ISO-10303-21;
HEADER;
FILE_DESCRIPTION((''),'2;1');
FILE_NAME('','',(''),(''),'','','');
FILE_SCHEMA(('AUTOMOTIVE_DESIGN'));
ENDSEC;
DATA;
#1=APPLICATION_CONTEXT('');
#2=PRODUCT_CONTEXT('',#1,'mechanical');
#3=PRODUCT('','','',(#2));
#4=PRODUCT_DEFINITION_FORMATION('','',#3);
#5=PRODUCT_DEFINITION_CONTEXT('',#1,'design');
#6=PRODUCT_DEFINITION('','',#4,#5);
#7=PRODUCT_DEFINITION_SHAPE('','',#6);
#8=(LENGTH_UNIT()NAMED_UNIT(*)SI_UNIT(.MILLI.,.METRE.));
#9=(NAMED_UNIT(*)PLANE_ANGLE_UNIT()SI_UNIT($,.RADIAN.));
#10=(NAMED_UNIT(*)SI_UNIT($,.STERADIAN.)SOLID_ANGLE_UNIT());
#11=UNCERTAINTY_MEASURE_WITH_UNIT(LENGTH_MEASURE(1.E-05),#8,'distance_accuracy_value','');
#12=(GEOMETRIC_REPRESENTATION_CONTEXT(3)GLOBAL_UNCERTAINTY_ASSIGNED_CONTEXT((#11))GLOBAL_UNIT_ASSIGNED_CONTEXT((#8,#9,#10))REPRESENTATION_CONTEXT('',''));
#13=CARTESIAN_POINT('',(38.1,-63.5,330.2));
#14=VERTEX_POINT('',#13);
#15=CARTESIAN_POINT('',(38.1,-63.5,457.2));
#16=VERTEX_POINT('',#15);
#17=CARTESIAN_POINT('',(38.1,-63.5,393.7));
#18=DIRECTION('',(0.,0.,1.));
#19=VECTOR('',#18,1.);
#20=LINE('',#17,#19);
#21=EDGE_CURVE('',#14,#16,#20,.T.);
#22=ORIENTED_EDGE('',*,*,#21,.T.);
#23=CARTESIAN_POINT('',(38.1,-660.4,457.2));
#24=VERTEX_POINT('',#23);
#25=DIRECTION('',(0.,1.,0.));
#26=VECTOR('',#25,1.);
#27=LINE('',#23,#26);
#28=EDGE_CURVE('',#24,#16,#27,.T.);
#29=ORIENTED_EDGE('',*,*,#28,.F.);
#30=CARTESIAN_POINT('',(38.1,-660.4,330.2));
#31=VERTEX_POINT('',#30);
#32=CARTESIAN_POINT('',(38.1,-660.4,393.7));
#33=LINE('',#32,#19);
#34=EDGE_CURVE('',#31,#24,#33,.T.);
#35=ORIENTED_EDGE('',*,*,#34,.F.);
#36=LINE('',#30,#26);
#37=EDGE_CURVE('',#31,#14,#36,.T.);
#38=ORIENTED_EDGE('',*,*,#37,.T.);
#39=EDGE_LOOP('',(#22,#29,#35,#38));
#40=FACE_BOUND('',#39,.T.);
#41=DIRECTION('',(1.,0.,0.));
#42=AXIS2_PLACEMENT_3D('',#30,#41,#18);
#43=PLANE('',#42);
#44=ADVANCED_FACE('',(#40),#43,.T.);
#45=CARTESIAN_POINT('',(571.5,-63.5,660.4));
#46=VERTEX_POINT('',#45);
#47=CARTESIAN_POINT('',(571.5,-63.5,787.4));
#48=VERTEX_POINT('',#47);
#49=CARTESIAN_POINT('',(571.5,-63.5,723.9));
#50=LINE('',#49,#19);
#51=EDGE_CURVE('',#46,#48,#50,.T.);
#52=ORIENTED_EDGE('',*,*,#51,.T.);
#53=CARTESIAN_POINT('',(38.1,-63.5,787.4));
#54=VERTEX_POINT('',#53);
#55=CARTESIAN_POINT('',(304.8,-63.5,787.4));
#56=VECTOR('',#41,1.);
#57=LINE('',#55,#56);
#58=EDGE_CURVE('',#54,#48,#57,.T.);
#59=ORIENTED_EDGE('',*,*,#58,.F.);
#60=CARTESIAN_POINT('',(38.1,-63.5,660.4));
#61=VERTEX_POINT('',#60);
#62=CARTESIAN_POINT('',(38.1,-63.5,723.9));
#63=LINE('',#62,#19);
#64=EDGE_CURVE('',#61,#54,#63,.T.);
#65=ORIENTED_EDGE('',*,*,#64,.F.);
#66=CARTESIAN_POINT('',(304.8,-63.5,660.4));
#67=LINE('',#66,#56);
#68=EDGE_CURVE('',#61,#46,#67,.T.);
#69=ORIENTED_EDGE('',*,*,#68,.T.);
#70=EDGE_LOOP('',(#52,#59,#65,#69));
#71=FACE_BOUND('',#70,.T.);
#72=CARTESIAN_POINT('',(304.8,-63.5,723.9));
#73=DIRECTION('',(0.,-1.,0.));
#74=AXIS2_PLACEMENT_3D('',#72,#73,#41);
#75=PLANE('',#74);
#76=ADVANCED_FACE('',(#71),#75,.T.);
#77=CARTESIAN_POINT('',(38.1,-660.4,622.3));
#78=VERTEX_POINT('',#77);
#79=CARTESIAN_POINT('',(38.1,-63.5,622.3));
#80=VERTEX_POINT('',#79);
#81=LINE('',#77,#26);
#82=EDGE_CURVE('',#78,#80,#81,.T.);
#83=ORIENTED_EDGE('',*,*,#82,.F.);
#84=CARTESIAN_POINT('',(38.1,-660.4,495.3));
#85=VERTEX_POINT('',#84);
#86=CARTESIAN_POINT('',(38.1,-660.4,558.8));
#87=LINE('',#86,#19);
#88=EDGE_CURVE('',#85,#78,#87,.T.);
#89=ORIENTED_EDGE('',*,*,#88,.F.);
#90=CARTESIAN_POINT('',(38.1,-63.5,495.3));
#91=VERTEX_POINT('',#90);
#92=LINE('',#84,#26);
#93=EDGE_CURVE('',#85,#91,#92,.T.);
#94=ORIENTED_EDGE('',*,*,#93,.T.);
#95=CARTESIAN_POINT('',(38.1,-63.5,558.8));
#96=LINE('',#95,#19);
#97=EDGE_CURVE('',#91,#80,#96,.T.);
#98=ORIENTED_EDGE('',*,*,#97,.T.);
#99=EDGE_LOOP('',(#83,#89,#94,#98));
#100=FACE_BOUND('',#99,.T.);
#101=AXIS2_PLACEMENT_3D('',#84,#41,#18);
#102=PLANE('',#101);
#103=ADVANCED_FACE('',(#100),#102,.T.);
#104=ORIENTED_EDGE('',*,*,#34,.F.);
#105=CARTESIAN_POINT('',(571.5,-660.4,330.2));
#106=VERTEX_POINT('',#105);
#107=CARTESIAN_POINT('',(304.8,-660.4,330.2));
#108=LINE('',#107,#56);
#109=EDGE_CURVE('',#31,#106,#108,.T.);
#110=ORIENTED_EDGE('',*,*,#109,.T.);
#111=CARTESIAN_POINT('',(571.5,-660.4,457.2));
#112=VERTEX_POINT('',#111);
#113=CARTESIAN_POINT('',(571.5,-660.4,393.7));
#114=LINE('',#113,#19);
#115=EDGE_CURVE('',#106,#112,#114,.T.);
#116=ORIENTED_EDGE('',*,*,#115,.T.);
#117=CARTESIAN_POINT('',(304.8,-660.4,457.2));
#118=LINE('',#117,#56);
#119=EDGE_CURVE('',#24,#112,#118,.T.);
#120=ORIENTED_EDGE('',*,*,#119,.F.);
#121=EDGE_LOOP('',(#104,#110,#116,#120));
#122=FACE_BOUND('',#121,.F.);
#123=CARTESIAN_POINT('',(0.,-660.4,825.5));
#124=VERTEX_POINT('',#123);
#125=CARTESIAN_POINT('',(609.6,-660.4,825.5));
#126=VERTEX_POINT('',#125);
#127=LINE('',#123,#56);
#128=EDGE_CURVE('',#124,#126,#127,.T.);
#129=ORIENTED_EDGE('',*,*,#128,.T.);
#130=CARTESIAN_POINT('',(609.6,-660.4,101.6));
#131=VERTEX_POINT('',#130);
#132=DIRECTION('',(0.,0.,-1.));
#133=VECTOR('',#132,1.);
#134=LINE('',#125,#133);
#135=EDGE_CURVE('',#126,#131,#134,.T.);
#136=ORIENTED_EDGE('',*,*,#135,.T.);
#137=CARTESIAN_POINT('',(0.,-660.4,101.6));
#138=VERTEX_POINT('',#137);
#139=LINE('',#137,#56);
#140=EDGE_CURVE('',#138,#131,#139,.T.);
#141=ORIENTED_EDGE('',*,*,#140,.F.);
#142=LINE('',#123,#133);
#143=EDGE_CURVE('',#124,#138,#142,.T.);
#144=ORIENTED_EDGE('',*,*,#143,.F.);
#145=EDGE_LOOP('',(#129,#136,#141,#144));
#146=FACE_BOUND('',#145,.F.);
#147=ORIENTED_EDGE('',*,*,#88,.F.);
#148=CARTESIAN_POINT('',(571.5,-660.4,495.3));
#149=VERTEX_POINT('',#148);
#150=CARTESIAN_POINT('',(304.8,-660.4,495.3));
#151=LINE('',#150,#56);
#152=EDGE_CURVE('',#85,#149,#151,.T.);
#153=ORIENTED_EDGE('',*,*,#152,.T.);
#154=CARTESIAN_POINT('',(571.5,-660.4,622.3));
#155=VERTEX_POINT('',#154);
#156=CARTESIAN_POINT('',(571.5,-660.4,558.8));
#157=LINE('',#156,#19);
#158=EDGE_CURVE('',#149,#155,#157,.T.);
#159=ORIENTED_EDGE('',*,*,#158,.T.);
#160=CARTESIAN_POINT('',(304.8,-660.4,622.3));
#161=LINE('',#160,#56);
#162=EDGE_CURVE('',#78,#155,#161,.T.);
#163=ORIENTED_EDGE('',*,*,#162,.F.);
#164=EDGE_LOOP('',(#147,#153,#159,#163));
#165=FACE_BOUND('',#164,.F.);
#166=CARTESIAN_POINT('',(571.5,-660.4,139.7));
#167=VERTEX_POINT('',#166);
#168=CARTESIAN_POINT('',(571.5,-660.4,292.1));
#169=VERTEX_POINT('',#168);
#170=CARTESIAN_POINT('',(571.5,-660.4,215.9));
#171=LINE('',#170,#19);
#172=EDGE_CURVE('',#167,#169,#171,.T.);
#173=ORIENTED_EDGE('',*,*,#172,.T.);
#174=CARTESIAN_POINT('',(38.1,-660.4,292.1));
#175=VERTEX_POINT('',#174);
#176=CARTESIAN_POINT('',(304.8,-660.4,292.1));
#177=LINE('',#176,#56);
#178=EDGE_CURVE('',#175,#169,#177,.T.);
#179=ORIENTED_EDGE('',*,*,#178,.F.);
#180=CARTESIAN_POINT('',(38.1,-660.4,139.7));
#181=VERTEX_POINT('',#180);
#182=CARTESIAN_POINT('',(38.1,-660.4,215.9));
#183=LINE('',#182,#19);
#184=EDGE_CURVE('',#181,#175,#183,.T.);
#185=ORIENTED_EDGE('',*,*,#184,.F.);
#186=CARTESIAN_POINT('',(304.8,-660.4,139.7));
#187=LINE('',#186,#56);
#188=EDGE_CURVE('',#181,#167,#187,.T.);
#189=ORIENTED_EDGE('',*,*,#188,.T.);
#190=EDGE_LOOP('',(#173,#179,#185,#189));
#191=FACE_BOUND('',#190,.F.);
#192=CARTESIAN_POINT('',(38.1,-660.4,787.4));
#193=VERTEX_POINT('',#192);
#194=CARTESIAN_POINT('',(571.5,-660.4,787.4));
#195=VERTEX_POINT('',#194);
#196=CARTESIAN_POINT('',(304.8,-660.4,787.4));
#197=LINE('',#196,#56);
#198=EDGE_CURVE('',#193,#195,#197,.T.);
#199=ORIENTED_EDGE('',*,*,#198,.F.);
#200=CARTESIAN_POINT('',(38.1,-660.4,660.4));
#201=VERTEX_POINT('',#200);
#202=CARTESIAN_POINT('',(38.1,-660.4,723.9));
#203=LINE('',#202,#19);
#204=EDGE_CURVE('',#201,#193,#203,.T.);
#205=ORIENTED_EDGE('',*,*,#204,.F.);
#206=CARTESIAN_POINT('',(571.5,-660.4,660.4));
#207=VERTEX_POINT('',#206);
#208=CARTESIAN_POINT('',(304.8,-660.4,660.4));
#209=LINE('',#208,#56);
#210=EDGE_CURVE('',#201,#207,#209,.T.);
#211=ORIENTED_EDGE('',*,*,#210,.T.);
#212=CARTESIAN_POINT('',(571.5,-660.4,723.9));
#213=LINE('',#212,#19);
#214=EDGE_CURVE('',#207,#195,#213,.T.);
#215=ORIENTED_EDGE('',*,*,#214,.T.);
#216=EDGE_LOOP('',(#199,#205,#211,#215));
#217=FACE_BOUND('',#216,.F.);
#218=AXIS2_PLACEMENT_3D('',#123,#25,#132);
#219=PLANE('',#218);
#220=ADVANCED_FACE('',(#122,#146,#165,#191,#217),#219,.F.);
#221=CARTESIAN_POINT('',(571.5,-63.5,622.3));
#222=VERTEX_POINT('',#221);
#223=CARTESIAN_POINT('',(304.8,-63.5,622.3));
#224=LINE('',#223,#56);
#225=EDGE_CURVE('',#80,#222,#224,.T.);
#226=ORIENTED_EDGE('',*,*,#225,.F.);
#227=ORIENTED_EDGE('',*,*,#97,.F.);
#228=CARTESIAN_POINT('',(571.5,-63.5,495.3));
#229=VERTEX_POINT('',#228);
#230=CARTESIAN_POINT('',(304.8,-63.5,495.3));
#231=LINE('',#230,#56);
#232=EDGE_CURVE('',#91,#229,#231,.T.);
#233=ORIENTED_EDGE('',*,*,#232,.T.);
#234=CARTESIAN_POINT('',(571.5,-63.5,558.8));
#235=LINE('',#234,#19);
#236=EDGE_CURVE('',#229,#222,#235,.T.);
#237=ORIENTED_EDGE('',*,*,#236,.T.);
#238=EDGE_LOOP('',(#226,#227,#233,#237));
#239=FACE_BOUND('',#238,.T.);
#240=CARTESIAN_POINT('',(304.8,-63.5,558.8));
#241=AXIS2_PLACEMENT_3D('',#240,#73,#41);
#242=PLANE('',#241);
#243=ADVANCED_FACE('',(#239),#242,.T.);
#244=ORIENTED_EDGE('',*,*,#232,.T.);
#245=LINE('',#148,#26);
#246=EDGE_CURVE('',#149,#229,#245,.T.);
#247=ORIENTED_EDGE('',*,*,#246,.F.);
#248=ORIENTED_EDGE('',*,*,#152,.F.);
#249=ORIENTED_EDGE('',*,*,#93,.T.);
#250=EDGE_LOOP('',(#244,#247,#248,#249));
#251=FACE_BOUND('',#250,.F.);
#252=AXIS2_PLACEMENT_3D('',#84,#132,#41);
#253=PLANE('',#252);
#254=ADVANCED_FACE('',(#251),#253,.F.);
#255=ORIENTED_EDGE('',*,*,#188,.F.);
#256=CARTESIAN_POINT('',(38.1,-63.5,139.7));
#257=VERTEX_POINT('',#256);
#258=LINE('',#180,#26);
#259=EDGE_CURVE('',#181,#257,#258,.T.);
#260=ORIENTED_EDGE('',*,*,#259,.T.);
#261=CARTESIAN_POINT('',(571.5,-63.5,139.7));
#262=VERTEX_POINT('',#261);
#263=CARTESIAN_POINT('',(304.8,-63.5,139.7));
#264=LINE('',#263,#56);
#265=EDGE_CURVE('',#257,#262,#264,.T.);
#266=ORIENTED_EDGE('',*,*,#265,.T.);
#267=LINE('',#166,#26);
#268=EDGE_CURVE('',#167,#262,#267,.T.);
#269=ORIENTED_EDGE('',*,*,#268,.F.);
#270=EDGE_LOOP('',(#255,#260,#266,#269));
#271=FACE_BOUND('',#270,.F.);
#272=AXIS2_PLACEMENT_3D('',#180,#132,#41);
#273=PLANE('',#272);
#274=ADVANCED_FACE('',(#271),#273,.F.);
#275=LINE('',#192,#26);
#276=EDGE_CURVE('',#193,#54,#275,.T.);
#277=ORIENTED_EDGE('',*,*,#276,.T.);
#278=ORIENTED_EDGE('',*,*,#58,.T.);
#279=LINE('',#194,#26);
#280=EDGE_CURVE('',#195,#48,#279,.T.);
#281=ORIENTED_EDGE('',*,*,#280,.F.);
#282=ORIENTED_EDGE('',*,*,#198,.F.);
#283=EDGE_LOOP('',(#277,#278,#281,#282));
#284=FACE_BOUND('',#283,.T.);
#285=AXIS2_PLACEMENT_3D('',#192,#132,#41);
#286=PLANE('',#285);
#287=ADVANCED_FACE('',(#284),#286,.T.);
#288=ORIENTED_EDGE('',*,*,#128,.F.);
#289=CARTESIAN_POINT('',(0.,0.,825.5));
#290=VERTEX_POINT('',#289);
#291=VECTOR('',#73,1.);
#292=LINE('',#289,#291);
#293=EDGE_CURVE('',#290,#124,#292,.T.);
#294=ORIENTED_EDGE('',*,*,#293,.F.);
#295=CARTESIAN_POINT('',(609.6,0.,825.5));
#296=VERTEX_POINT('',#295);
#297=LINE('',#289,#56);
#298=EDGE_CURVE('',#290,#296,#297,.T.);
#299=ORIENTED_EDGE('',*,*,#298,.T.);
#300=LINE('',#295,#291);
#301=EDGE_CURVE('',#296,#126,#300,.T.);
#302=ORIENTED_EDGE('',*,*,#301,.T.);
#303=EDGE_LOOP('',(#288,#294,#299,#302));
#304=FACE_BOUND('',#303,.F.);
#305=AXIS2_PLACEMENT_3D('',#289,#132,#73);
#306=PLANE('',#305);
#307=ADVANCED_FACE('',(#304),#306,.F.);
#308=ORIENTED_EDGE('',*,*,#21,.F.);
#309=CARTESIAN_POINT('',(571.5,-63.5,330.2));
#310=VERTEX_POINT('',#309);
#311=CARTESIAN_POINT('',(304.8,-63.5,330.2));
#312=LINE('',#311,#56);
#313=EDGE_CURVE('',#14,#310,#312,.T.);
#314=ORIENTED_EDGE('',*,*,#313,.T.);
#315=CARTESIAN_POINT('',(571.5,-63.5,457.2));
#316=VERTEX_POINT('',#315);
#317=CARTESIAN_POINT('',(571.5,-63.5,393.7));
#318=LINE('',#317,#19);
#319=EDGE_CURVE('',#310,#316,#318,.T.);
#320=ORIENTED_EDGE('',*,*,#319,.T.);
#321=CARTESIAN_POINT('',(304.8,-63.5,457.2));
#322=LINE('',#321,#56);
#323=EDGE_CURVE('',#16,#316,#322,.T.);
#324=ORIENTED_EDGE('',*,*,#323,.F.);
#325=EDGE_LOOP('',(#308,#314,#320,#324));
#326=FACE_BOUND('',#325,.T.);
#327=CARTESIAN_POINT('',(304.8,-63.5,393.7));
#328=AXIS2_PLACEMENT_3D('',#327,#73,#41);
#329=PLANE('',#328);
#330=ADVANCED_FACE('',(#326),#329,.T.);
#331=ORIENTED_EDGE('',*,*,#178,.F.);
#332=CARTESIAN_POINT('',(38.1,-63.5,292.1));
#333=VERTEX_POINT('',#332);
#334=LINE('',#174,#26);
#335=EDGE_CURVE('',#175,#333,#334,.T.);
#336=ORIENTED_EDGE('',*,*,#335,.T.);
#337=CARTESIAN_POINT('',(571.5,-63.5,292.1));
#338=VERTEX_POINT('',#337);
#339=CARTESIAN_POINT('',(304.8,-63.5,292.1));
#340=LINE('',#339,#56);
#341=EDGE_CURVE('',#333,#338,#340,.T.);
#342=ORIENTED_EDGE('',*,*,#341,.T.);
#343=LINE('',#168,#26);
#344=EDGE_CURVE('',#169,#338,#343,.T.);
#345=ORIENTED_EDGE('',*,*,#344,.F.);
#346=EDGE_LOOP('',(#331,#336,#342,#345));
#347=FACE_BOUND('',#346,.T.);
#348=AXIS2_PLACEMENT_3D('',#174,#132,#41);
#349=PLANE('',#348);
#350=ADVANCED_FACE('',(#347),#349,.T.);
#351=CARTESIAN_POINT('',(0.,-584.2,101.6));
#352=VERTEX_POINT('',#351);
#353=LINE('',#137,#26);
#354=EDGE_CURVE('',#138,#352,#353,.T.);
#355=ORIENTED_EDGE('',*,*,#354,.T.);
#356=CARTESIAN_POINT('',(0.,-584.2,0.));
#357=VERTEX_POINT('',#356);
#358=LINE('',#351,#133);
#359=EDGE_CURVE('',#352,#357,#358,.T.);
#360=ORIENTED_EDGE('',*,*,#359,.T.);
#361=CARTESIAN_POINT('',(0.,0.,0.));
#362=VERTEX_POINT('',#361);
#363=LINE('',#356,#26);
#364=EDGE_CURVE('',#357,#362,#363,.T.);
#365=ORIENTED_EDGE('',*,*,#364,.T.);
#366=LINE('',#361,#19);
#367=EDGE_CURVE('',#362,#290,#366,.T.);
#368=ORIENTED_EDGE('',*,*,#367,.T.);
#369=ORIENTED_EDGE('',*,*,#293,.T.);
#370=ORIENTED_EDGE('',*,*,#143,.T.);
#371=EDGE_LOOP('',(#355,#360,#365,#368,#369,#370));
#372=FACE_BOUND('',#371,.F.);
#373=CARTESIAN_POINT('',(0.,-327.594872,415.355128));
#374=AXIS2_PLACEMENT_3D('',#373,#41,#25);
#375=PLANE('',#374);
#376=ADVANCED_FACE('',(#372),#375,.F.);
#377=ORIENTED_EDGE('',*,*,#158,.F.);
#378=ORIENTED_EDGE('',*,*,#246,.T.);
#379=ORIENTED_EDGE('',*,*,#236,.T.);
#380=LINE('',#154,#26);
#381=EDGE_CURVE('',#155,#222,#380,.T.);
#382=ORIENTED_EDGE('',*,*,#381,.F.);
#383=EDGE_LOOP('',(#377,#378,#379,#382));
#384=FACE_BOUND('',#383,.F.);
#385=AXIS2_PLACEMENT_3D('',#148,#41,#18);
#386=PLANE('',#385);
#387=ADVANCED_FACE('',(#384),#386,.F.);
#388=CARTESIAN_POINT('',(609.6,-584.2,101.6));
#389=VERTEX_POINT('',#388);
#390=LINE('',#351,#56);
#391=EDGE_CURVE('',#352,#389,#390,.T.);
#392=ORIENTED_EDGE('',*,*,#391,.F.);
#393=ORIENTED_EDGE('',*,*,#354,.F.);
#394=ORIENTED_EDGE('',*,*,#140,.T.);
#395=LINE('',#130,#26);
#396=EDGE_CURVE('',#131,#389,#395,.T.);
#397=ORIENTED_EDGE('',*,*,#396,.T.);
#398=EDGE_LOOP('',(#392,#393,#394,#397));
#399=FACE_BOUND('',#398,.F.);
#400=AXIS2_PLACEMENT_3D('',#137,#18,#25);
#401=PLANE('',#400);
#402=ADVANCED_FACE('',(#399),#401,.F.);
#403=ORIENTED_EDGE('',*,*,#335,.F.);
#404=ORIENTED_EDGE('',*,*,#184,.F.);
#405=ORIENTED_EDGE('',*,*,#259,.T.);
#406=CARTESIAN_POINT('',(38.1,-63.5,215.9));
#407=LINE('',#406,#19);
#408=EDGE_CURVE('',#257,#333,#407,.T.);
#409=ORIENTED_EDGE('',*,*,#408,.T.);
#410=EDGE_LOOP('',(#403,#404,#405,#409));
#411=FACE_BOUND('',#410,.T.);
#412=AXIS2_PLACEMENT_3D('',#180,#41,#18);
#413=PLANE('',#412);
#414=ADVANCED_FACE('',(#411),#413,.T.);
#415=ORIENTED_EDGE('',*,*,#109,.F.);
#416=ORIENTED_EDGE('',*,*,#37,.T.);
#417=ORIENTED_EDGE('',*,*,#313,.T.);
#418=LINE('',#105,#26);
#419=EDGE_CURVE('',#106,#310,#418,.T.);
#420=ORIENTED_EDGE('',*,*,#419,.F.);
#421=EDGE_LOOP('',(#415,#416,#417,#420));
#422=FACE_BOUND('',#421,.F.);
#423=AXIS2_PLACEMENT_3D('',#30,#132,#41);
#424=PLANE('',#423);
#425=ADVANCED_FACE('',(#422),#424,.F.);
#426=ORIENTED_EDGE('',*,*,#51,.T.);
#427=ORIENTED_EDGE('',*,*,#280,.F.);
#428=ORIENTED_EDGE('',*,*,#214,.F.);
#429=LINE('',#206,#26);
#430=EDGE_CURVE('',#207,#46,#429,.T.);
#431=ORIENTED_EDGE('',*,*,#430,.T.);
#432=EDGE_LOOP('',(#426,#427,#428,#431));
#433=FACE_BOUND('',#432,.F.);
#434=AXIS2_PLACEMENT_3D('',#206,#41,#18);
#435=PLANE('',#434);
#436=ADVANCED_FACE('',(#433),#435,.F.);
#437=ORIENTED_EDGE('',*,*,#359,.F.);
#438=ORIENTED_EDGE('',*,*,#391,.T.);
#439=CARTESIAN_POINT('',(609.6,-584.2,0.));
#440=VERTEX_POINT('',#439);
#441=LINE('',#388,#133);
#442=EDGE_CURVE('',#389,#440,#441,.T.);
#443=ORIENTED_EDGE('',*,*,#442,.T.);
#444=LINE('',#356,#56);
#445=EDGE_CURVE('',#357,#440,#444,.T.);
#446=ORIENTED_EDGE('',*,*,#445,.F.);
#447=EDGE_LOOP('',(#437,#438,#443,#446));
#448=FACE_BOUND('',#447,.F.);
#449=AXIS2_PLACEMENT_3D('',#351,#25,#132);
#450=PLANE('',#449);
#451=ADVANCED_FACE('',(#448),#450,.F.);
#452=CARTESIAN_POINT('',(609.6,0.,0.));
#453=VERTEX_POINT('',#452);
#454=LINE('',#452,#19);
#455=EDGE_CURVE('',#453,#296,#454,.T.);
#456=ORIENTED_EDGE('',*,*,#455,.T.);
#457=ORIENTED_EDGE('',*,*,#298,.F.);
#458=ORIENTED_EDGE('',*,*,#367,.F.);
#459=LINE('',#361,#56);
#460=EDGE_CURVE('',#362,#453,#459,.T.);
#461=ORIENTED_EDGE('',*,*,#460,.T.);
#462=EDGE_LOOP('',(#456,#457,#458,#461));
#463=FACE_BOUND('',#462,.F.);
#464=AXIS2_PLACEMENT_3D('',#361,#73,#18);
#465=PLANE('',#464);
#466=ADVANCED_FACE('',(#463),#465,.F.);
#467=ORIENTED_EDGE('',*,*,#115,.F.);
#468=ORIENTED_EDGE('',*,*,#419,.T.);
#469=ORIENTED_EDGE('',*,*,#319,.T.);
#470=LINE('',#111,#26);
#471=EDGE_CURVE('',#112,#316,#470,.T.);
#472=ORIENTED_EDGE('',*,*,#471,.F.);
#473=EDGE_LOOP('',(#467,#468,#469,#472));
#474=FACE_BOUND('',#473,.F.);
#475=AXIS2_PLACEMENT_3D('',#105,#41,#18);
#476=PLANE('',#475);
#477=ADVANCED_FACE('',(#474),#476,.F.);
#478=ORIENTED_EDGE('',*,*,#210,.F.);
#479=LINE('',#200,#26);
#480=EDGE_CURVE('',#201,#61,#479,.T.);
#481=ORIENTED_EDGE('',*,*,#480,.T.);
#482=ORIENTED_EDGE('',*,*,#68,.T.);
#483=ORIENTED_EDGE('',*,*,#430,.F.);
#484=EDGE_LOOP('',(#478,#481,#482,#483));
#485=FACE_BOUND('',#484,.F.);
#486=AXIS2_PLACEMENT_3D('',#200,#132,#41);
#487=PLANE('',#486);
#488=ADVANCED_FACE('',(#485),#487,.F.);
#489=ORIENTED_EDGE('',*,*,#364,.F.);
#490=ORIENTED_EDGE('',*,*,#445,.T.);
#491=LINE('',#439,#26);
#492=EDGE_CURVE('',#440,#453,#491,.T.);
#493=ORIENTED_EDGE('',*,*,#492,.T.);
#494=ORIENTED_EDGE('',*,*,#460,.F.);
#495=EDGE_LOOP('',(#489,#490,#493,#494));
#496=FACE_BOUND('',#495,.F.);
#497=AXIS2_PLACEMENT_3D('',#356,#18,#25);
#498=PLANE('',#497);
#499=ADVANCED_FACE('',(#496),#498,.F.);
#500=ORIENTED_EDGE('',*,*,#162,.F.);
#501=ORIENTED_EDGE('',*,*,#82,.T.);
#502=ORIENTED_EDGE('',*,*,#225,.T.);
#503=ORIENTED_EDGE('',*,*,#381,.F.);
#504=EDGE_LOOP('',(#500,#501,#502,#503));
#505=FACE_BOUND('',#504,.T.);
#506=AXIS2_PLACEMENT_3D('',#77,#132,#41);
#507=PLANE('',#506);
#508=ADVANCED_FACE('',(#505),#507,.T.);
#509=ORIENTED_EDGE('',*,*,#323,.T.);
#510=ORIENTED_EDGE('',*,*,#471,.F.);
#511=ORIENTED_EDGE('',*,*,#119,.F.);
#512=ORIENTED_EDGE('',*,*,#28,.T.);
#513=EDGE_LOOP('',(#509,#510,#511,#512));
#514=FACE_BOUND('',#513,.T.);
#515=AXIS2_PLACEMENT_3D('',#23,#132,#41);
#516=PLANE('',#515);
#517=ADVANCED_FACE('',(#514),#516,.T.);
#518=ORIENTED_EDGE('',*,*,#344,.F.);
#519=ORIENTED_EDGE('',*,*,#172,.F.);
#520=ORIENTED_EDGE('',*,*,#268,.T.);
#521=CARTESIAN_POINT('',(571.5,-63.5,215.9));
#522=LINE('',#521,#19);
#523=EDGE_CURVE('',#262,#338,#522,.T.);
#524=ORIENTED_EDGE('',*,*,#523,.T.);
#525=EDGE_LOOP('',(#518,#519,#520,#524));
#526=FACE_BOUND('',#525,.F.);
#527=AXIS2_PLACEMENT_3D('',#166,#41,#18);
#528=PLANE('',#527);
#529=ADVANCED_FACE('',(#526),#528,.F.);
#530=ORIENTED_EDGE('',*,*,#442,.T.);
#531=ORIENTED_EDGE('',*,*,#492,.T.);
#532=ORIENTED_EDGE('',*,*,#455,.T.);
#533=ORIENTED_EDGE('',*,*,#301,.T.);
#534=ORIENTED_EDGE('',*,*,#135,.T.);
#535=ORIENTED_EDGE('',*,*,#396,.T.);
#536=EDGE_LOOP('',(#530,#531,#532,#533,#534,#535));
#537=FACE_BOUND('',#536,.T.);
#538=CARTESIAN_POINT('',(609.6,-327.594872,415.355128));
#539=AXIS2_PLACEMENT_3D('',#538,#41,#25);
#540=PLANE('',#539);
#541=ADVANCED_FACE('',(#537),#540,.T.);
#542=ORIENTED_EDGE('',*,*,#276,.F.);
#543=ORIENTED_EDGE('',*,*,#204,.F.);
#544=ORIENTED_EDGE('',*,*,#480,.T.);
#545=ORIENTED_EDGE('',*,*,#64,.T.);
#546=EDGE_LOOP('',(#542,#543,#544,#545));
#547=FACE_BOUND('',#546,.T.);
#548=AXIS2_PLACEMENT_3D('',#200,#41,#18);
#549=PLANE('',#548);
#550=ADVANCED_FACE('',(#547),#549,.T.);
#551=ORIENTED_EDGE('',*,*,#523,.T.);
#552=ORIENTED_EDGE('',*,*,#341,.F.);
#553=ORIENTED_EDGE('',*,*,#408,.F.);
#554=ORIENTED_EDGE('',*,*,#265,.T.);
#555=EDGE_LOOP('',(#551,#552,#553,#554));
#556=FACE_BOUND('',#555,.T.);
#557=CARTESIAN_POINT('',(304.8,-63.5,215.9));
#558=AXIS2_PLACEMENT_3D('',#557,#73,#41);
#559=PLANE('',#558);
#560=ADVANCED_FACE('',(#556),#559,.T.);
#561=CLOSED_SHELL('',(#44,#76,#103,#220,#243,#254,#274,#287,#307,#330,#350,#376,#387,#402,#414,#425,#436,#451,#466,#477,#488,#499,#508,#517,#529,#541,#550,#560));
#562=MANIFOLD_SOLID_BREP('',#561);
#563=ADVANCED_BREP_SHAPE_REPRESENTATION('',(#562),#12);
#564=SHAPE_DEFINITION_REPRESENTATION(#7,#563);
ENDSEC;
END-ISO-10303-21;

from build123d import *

# Parameters (mm, degrees)
F1_DEPTH = 609.6
F2_W     = 533.4
F2_H     = 127
F2_H_2   = 152.4
F3_DEPTH = 596.9


# Not quite as in the source:
# - a feature names something its author has since deleted; it is built from what else it names


with BuildPart() as f1:
    # F0 (on Right) → F1 (new body)
    with BuildSketch(Plane.YZ):
        Polygon((-584.2, 0), (0, 0), (0, 825.5), (-660.4, 825.5), (-660.4, 101.6), (-584.2, 101.6), align=None)
    extrude(amount=F1_DEPTH)

    # F2 (on face) → F3 (cut)
    with BuildSketch(Plane.XZ.offset(660.4)):
        with Locations((304.8, 723.9)):
            Rectangle(F2_W, F2_H)
        with Locations((304.8, 558.8)):
            Rectangle(F2_W, F2_H)
        with Locations((304.8, 393.7)):
            Rectangle(F2_W, F2_H)
        with Locations((304.8, 215.9)):
            Rectangle(F2_W, F2_H_2)
    extrude(amount=-F3_DEPTH, mode=Mode.SUBTRACT)


solid = f1.part
